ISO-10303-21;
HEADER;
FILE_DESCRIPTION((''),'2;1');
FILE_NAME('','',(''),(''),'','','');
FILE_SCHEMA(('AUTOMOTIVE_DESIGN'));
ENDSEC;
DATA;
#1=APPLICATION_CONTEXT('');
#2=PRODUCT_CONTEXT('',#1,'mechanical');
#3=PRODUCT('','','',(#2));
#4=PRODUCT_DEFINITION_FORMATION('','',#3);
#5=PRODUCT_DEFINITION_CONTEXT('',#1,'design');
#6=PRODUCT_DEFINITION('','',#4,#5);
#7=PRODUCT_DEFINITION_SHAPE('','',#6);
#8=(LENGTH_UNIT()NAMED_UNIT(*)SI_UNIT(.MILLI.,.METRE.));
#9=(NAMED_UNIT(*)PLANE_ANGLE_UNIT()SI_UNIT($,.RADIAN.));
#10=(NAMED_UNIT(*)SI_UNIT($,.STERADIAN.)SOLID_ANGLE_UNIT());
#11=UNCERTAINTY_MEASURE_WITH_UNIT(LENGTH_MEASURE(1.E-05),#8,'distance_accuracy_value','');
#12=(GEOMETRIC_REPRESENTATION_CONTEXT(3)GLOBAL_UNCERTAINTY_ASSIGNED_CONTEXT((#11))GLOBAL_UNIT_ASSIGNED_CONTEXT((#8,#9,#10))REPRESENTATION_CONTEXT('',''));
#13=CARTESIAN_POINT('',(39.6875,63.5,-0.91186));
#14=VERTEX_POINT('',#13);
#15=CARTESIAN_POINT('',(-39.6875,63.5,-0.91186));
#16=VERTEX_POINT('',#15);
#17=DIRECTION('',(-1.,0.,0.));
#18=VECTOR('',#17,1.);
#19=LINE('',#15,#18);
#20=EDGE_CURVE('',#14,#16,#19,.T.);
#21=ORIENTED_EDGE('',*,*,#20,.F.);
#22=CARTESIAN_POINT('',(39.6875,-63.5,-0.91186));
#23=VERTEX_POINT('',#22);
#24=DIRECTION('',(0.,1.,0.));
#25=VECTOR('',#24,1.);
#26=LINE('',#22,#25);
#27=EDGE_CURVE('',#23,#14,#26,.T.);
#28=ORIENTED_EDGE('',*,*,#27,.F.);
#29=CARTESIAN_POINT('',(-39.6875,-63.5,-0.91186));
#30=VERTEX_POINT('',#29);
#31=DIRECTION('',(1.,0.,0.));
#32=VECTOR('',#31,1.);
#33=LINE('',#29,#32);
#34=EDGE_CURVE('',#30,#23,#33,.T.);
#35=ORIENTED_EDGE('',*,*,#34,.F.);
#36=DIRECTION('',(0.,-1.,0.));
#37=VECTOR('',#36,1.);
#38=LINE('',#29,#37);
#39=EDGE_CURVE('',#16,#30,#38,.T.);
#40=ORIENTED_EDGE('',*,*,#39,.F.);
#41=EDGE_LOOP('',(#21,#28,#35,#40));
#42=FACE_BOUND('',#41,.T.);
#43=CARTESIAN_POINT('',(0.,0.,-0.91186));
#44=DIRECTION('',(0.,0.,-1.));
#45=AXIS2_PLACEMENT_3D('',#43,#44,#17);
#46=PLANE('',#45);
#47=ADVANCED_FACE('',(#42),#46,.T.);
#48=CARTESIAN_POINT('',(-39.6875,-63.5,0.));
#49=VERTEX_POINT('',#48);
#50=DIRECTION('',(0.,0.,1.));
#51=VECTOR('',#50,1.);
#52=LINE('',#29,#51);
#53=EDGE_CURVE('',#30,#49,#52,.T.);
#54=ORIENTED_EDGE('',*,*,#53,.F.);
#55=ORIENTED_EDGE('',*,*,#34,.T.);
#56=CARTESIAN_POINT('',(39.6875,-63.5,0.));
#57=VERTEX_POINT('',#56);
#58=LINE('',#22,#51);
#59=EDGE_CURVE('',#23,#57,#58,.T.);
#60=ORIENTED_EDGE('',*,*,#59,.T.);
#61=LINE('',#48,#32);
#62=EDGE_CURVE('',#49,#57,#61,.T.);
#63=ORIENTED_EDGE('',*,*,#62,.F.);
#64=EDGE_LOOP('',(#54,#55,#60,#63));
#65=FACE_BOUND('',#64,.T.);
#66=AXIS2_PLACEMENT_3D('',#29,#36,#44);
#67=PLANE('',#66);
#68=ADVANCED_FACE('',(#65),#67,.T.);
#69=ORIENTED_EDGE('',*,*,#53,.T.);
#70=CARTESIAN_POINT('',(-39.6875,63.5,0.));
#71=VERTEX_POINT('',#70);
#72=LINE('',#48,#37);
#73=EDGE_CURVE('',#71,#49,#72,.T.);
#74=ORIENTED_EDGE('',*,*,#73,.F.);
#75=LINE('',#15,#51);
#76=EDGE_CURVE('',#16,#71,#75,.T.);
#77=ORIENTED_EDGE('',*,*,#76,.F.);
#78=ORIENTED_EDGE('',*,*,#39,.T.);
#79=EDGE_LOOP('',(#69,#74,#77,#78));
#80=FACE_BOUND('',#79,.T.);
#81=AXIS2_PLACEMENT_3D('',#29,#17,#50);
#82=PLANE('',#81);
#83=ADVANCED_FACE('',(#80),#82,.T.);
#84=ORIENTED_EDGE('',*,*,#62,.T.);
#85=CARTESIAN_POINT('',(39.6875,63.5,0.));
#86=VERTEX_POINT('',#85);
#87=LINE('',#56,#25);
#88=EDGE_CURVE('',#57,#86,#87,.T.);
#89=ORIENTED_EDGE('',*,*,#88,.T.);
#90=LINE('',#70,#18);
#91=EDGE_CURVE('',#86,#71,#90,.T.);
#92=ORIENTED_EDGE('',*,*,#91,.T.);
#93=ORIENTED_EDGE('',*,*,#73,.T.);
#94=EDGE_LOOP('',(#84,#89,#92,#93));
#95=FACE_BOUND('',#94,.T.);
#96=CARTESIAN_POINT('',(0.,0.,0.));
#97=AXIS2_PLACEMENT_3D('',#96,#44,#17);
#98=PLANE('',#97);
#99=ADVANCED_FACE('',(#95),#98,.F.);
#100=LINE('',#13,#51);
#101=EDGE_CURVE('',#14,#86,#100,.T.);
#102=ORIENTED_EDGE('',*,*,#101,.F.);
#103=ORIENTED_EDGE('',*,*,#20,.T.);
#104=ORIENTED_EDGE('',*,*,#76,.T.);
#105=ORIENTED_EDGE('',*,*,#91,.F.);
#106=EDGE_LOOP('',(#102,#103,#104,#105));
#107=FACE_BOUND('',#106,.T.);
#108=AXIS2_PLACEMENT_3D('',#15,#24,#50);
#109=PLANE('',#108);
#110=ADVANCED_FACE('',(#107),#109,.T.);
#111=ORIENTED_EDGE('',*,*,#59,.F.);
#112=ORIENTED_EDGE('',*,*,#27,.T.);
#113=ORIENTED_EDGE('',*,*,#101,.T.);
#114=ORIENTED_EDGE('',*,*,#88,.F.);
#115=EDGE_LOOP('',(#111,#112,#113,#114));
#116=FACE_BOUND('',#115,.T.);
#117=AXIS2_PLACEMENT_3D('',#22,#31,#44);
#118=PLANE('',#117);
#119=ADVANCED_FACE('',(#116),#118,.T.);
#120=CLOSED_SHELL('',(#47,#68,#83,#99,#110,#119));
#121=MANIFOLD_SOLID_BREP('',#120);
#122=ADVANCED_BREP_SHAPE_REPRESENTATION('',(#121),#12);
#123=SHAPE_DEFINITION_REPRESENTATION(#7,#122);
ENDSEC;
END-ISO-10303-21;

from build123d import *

# Parameters (mm, degrees)
SKETCH1_W          = 79.375
SKETCH1_H          = 127
BASE_FLANGE1_DEPTH = 0.91186


# Sheet-metal steps are written as plain solids
with BuildPart() as part:
    # Sketch1 → Base-Flange1 (new body)
    with BuildSketch(Plane.XY):
        Rectangle(SKETCH1_W, SKETCH1_H)
    extrude(amount=-BASE_FLANGE1_DEPTH)


solid = part.part
